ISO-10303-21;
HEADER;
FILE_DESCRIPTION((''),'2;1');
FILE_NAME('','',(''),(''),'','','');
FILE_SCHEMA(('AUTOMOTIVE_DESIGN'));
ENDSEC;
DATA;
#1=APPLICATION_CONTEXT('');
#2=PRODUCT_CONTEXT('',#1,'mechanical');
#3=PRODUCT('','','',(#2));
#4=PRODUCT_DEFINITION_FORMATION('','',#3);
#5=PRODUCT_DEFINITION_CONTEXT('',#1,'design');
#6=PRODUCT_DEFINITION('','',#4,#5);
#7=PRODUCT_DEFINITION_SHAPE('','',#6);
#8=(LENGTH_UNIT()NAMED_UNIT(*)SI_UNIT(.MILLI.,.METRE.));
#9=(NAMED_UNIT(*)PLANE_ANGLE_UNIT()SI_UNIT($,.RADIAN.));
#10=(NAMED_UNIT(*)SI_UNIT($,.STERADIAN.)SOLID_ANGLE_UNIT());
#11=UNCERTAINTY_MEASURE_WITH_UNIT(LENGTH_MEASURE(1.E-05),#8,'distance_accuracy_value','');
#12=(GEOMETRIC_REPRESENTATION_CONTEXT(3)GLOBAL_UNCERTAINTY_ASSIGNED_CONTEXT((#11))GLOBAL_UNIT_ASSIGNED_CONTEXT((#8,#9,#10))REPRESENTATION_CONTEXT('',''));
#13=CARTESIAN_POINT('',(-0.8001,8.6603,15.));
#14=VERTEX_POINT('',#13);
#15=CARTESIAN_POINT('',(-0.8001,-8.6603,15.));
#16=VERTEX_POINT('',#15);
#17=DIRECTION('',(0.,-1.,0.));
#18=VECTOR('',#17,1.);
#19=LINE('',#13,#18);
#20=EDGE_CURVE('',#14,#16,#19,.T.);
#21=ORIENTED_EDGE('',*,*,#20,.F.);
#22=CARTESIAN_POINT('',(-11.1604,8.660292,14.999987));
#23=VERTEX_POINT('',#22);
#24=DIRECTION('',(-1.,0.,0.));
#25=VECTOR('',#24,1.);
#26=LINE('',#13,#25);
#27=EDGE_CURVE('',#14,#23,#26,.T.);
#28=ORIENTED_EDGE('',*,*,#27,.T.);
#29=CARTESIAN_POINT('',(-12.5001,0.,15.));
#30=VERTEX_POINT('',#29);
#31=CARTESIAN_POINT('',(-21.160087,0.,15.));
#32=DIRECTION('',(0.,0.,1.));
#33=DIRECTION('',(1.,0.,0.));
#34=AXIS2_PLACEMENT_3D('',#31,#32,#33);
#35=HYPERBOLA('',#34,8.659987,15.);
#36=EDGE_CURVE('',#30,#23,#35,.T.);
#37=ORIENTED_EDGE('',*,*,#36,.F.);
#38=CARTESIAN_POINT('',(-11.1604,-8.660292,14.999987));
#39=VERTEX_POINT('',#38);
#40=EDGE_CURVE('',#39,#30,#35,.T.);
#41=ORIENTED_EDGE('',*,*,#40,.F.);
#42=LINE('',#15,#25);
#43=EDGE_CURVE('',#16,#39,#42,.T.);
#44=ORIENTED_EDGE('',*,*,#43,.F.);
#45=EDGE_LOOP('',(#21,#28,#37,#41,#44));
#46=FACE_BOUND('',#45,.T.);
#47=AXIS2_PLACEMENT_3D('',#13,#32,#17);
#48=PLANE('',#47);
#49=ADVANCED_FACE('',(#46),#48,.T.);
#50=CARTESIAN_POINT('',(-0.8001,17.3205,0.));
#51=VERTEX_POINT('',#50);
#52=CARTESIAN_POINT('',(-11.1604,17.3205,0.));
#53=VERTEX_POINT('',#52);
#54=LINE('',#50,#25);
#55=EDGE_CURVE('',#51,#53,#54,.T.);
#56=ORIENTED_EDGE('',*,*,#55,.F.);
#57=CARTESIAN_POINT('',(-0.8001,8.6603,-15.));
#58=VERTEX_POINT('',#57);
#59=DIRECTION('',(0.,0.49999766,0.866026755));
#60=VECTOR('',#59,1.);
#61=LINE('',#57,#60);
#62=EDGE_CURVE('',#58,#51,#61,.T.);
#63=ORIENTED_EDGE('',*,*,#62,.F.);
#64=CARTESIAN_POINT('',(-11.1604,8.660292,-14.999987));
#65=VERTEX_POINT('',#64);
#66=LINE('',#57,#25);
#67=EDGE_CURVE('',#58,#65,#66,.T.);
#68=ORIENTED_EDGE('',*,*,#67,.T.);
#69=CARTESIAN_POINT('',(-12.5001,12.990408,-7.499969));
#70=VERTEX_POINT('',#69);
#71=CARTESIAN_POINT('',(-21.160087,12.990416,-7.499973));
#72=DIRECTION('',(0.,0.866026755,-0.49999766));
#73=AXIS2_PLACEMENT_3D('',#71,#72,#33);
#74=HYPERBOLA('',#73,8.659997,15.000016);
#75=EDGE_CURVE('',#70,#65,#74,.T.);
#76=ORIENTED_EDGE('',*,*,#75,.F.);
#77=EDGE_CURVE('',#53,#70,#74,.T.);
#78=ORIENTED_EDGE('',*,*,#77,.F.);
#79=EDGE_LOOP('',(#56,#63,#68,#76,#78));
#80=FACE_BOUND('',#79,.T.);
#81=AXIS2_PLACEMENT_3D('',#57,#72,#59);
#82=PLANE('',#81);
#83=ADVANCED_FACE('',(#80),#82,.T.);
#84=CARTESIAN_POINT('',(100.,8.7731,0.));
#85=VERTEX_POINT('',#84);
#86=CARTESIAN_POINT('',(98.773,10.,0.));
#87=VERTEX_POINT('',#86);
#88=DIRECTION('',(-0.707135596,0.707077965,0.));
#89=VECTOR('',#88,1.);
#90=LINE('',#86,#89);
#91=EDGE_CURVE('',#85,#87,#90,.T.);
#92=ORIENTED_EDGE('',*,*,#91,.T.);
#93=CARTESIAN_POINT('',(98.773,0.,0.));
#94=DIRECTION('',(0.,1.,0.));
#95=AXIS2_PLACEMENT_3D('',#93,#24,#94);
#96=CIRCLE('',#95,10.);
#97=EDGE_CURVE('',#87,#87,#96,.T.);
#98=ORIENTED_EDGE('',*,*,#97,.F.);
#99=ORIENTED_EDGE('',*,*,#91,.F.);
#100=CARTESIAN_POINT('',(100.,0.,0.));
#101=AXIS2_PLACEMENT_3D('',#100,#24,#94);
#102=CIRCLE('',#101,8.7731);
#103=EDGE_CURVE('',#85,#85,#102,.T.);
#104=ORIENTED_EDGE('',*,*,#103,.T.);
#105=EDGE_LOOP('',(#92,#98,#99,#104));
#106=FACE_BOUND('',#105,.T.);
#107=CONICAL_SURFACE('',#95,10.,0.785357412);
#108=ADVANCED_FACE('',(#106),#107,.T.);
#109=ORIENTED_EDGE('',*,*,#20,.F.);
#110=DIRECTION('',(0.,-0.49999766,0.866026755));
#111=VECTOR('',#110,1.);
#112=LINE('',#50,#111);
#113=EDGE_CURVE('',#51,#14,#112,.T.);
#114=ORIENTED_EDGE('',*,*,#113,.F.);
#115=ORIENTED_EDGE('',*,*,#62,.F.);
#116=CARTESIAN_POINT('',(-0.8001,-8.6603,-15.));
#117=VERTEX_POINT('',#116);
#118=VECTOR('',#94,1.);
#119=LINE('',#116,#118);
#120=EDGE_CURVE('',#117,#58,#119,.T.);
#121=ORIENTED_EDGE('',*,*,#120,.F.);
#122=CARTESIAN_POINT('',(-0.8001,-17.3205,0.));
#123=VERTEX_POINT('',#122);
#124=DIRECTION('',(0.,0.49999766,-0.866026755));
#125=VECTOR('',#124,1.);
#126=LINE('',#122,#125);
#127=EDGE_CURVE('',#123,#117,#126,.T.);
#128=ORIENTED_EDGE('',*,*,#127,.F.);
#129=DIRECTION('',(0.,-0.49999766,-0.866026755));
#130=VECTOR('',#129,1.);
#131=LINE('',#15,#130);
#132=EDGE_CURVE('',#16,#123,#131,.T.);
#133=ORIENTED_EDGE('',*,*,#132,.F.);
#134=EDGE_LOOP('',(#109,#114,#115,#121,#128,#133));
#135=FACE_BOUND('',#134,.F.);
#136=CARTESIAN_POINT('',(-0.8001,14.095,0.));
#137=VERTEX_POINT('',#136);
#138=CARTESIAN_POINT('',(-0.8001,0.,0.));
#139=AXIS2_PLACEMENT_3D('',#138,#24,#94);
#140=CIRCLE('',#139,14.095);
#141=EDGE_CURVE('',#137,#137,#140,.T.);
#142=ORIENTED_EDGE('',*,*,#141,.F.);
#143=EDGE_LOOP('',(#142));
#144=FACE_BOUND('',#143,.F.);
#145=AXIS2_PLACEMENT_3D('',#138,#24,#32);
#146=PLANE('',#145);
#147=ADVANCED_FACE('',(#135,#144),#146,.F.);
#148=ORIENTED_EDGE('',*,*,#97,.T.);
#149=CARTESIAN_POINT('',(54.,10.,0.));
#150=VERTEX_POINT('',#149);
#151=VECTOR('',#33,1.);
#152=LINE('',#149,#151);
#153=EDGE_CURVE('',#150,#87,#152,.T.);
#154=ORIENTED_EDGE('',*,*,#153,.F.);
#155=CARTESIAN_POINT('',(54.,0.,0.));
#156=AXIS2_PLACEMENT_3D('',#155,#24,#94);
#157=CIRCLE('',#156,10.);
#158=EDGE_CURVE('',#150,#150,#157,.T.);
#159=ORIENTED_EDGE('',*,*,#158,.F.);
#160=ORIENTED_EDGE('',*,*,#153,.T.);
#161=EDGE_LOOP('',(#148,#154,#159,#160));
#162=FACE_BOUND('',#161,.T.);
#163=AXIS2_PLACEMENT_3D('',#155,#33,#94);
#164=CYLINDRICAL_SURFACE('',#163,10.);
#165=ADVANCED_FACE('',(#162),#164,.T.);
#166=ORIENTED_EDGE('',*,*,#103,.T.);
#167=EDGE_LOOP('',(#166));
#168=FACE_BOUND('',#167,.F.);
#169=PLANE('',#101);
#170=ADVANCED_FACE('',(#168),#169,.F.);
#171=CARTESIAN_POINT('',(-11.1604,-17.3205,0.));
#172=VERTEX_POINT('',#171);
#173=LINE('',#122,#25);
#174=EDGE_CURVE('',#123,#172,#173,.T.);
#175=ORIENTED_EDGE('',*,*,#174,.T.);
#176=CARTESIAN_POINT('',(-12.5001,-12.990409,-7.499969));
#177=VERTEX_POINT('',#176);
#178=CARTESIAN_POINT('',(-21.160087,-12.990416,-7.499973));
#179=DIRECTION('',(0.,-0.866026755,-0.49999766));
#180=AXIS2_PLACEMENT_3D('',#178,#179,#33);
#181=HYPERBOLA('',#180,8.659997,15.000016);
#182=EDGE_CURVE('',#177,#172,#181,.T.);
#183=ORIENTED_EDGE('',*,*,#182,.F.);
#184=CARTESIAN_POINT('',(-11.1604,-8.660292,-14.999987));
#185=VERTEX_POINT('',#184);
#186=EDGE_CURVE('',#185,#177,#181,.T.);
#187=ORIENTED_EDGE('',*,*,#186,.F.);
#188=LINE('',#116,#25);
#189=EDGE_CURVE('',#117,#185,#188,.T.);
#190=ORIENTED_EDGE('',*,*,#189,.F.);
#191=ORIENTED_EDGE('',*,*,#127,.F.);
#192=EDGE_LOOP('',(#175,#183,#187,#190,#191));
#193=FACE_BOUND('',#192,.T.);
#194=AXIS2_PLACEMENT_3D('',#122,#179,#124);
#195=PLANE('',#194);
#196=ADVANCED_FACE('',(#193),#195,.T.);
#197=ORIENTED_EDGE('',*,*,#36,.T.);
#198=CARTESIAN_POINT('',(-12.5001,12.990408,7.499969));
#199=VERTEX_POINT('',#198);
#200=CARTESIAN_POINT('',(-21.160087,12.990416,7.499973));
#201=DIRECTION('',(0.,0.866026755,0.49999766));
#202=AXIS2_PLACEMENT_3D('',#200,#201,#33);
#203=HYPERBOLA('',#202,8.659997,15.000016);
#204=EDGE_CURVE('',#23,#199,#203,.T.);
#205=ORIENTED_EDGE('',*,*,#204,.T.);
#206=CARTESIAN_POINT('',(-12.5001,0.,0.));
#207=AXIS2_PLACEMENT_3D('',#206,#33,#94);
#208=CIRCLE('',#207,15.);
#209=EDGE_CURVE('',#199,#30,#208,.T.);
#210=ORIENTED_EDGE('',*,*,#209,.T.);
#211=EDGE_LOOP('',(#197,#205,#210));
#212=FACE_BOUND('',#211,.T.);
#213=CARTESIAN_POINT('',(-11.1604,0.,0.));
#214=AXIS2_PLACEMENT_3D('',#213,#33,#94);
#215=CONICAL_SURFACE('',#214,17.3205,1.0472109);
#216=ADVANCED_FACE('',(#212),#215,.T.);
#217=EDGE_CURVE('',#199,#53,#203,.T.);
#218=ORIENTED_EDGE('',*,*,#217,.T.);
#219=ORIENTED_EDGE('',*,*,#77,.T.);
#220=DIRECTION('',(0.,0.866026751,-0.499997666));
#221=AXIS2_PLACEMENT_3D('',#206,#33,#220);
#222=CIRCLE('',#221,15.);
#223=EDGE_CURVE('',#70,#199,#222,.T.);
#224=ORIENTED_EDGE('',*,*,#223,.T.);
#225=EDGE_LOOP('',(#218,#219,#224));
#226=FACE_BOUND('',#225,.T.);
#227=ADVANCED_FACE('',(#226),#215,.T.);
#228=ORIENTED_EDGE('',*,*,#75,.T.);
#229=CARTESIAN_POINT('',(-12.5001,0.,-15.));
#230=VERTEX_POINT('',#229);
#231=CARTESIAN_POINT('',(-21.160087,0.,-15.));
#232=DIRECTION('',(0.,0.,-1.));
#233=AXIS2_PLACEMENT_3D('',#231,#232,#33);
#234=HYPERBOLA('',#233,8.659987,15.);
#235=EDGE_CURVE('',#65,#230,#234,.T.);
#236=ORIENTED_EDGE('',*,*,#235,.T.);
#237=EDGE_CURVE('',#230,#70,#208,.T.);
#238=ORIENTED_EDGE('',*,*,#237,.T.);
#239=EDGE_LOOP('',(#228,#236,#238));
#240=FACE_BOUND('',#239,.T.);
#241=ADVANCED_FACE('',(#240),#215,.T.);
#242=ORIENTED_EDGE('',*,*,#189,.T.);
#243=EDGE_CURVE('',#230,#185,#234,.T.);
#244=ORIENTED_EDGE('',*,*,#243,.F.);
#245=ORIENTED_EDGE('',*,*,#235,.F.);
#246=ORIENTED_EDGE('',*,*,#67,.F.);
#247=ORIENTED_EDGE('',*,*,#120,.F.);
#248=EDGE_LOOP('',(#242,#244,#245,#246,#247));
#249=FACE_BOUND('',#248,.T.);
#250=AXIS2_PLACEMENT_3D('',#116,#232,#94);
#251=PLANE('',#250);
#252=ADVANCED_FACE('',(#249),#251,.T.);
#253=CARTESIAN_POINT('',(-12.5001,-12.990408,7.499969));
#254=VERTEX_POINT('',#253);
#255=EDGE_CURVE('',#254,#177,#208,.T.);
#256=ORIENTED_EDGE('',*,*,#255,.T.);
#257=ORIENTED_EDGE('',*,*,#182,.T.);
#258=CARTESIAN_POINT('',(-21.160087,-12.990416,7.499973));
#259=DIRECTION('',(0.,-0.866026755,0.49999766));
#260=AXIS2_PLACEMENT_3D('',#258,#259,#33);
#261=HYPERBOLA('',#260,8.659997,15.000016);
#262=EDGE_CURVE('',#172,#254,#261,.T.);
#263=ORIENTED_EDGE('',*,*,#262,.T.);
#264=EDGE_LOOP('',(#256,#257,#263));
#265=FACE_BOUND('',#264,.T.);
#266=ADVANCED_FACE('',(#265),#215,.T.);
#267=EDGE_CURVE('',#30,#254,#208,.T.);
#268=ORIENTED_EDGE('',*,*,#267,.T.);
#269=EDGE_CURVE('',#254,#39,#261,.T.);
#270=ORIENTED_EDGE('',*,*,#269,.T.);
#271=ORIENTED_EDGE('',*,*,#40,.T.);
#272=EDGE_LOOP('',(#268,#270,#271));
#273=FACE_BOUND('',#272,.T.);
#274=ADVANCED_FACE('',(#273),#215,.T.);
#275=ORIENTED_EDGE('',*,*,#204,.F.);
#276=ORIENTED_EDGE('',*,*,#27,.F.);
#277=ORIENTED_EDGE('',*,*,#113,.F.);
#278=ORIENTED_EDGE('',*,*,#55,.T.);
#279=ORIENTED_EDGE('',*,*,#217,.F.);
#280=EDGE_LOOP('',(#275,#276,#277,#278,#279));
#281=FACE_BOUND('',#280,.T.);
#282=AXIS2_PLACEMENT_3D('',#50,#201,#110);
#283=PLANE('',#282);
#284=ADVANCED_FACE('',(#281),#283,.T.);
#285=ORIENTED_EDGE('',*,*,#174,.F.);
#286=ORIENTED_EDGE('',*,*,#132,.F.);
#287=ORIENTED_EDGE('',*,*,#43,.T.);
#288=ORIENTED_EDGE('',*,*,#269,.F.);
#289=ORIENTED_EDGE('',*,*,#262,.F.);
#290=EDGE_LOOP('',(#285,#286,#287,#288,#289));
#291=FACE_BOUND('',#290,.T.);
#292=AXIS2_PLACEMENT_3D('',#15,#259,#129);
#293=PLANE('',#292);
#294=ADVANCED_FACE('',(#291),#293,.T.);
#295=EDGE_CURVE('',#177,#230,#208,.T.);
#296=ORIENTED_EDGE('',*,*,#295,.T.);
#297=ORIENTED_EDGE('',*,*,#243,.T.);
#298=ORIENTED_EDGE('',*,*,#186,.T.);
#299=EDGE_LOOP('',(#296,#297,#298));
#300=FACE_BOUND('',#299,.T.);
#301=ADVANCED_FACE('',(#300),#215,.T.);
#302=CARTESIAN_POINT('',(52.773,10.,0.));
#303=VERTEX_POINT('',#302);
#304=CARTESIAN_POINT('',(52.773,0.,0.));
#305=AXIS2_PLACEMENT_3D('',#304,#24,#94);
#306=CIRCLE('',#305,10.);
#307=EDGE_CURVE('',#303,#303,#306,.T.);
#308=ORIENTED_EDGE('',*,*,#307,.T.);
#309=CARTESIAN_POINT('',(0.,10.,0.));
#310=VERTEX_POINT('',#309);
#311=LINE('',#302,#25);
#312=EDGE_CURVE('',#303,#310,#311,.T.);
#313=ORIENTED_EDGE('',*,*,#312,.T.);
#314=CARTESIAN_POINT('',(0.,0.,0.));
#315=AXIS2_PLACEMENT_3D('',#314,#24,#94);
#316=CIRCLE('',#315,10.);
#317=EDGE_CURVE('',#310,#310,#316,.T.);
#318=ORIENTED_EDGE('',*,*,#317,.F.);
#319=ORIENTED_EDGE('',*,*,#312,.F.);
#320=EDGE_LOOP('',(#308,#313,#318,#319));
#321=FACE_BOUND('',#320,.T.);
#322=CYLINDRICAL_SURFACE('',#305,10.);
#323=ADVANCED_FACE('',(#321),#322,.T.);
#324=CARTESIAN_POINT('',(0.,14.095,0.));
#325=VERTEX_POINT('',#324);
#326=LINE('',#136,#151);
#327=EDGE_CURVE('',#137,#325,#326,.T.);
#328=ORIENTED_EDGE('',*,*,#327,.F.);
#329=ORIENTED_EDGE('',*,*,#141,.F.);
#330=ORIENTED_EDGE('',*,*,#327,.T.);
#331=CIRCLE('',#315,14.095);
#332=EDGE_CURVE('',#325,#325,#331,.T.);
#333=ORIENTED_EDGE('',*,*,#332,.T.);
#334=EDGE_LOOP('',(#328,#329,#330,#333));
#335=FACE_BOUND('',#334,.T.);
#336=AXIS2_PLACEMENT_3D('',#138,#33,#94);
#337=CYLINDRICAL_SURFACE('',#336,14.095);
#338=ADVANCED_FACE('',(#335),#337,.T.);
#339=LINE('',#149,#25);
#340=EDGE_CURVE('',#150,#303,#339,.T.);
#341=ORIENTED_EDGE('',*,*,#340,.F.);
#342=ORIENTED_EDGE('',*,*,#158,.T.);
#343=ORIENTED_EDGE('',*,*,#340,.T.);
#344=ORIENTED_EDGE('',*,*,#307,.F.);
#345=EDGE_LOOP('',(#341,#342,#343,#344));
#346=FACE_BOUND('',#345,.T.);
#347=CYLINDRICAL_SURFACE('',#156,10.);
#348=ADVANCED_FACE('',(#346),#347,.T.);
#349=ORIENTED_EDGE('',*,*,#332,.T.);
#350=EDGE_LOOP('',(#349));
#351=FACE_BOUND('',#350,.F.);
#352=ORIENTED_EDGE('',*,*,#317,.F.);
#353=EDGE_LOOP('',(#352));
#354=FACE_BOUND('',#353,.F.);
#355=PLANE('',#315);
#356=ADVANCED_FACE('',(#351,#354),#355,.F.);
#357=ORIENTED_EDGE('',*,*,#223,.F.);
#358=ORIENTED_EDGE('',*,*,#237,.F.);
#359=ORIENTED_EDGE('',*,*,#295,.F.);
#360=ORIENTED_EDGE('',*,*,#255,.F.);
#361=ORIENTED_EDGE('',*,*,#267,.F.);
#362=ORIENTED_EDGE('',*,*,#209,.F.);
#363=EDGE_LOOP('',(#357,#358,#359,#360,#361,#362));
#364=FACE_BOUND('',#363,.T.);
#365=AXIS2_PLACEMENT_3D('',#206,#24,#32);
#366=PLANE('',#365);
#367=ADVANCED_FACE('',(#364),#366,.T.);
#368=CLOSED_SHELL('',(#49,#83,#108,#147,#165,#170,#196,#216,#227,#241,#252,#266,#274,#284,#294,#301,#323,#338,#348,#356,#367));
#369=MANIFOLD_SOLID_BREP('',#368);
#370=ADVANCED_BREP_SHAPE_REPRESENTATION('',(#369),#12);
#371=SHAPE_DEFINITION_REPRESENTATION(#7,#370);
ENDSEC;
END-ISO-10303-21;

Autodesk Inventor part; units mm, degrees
ref_plane "YZ Plane" through (0, 0, 0) normal (1, 0, 0) x (0, 1, 0)
ref_plane "XZ Plane" through (0, 0, 0) normal (0, 1, 0) x (-1, 0, 0)
sketch "Sketch1" plane through (0, 0, 0) normal (0, 0, 1) x (1, 0, 0)
  line L0 (0, 14.095) -> (0, 10)
  line L1 (54, 10) -> (100, 10)
  line L2 (100, 10) -> (100, 0)
  line L3 (100, 0) -> (-0.8001, 0)
  line L4 (-20.9601, 0) -> (120.16, 0) projected
  line L5 (-0.8001, 0) -> (-0.8001, 14.095)
  line L6 (-0.8001, 14.095) -> (0, 14.095)
  line L7 (54, 10) -> (52.773, 10)
  line L8 (52.773, 10) -> (0, 10)
  line L9 (0, -2.819) -> (0, 16.914) projected
  dimension "d0" = 100
  dimension "d1" = 46
  dimension "d2" = 20
  dimension "d9" = 0.8001
  dimension "d10" = 28.19
  dimension "d13" = 1.227
  dimension "d14" = 20
revolve "Body" add sketch "Sketch1" angle 360 about axis through (100, 0, 0) along (-1, 0, 0)
sketch "Sketch2" plane through (-0.8001, 0, 0) normal (-1, 0, 0) x (0, 0, 1)
  line L0 (0, 17.3205) -> (15, 8.6603)
  line L1 (15, 8.6603) -> (15, -8.6603)
  line L2 (15, -8.6603) -> (0, -17.3205)
  line L3 (0, -17.3205) -> (-15, -8.6603)
  line L4 (-15, -8.6603) -> (-15, 8.6603)
  line L5 (-15, 8.6603) -> (0, 17.3205)
  point P0 (0, 0)
  point P1 (0, 0)
  dimension "d11" = 30
extrude "Head" add sketch "Sketch2" along normal blind 11.7
sketch "Sketch4" plane through (0, 0, 0) normal (0, 0, 1) x (1, 0, 0)
  line L0 (-12.5001, 15) -> (-12.5001, 17.3205)
  line L1 (-12.5001, 17.3205) -> (-11.1604, 17.3205)
  line L2 (-11.1604, 17.3205) -> (-12.5001, 15)
  line L3 (-14.8401, 0) -> (1.5399, 0) projected
  line L4 (-0.8001, 17.3205) -> (-12.5001, 17.3205) projected
  line L5 (-12.5001, 8.6603) -> (-12.5001, 17.3205) projected
  dimension "d5" = 30
  dimension "d19" = 30
revolve "Chamfer1" cut sketch "Sketch4" angle 360 about axis through (-10, 0, 0) along (1, 0, 0)
thread "Thread" size "M20x2" class "6g" standard "ISO Metric profile" length 46
chamfer "Chamfer2" distance 1.2269 distance2 1.227 1 edges at (100, -10, 0) measured on face at (100, 2.4562, 0.99)
ref_plane "Work Plane1" through (1.525, 0, 0) normal (0, 0, 1) x (1, 0, 0)
equation "\"d0\" = NLG"
equation "\"d1\" = GEL"
equation "\"d2\" = GD"
equation "\"d10\" = SD2"
equation "\"d14\" = BDM"
equation "\"d11\" = SW"
equation "\"d3\" = KOH - SD"
equation "\"d5\" = ANG1"
equation "\"d19\" = SW0"
equation "\"d15\" = GEL"
equation "\"d6\" = -0.5 * SPD + 0.5 * GD"
equation "\"NLG\" = 100"
equation "\"GD\" = NND"
equation "\"BDM\" = NND"
equation "\"KOH\" = 12.5"
equation "\"GEL\" = 46"
equation "\"SW\" = 30"
equation "\"SW0\" = SW"
equation "\"SPD\" = NND - 1.2269 * PTC"
equation "\"SD2\" = 28.19"
equation "\"SD\" = 0.8"
equation "\"ANG1\" = 30deg"
equation "\"GAL\" = 0.61345 * PTC"
equation "\"GUL\" = 0.61345 * PTC"
equation "\"RR\" = 0.8"
equation "\"GD1\" = THREADDIA - 1.2269 * PTC"
equation "\"SDH\" = SD2"
equation "\"TOA\" = 30deg"
equation "\"PTC\" = 2"
equation "\"E0\" = 1.155 * SW"
equation "\"NND\" = 20"
equation "\"THREADDIA\" = 20"
properties part number "ISO 8765 - M20 x 2 x 100" material "Stainless Steel, 440C"
